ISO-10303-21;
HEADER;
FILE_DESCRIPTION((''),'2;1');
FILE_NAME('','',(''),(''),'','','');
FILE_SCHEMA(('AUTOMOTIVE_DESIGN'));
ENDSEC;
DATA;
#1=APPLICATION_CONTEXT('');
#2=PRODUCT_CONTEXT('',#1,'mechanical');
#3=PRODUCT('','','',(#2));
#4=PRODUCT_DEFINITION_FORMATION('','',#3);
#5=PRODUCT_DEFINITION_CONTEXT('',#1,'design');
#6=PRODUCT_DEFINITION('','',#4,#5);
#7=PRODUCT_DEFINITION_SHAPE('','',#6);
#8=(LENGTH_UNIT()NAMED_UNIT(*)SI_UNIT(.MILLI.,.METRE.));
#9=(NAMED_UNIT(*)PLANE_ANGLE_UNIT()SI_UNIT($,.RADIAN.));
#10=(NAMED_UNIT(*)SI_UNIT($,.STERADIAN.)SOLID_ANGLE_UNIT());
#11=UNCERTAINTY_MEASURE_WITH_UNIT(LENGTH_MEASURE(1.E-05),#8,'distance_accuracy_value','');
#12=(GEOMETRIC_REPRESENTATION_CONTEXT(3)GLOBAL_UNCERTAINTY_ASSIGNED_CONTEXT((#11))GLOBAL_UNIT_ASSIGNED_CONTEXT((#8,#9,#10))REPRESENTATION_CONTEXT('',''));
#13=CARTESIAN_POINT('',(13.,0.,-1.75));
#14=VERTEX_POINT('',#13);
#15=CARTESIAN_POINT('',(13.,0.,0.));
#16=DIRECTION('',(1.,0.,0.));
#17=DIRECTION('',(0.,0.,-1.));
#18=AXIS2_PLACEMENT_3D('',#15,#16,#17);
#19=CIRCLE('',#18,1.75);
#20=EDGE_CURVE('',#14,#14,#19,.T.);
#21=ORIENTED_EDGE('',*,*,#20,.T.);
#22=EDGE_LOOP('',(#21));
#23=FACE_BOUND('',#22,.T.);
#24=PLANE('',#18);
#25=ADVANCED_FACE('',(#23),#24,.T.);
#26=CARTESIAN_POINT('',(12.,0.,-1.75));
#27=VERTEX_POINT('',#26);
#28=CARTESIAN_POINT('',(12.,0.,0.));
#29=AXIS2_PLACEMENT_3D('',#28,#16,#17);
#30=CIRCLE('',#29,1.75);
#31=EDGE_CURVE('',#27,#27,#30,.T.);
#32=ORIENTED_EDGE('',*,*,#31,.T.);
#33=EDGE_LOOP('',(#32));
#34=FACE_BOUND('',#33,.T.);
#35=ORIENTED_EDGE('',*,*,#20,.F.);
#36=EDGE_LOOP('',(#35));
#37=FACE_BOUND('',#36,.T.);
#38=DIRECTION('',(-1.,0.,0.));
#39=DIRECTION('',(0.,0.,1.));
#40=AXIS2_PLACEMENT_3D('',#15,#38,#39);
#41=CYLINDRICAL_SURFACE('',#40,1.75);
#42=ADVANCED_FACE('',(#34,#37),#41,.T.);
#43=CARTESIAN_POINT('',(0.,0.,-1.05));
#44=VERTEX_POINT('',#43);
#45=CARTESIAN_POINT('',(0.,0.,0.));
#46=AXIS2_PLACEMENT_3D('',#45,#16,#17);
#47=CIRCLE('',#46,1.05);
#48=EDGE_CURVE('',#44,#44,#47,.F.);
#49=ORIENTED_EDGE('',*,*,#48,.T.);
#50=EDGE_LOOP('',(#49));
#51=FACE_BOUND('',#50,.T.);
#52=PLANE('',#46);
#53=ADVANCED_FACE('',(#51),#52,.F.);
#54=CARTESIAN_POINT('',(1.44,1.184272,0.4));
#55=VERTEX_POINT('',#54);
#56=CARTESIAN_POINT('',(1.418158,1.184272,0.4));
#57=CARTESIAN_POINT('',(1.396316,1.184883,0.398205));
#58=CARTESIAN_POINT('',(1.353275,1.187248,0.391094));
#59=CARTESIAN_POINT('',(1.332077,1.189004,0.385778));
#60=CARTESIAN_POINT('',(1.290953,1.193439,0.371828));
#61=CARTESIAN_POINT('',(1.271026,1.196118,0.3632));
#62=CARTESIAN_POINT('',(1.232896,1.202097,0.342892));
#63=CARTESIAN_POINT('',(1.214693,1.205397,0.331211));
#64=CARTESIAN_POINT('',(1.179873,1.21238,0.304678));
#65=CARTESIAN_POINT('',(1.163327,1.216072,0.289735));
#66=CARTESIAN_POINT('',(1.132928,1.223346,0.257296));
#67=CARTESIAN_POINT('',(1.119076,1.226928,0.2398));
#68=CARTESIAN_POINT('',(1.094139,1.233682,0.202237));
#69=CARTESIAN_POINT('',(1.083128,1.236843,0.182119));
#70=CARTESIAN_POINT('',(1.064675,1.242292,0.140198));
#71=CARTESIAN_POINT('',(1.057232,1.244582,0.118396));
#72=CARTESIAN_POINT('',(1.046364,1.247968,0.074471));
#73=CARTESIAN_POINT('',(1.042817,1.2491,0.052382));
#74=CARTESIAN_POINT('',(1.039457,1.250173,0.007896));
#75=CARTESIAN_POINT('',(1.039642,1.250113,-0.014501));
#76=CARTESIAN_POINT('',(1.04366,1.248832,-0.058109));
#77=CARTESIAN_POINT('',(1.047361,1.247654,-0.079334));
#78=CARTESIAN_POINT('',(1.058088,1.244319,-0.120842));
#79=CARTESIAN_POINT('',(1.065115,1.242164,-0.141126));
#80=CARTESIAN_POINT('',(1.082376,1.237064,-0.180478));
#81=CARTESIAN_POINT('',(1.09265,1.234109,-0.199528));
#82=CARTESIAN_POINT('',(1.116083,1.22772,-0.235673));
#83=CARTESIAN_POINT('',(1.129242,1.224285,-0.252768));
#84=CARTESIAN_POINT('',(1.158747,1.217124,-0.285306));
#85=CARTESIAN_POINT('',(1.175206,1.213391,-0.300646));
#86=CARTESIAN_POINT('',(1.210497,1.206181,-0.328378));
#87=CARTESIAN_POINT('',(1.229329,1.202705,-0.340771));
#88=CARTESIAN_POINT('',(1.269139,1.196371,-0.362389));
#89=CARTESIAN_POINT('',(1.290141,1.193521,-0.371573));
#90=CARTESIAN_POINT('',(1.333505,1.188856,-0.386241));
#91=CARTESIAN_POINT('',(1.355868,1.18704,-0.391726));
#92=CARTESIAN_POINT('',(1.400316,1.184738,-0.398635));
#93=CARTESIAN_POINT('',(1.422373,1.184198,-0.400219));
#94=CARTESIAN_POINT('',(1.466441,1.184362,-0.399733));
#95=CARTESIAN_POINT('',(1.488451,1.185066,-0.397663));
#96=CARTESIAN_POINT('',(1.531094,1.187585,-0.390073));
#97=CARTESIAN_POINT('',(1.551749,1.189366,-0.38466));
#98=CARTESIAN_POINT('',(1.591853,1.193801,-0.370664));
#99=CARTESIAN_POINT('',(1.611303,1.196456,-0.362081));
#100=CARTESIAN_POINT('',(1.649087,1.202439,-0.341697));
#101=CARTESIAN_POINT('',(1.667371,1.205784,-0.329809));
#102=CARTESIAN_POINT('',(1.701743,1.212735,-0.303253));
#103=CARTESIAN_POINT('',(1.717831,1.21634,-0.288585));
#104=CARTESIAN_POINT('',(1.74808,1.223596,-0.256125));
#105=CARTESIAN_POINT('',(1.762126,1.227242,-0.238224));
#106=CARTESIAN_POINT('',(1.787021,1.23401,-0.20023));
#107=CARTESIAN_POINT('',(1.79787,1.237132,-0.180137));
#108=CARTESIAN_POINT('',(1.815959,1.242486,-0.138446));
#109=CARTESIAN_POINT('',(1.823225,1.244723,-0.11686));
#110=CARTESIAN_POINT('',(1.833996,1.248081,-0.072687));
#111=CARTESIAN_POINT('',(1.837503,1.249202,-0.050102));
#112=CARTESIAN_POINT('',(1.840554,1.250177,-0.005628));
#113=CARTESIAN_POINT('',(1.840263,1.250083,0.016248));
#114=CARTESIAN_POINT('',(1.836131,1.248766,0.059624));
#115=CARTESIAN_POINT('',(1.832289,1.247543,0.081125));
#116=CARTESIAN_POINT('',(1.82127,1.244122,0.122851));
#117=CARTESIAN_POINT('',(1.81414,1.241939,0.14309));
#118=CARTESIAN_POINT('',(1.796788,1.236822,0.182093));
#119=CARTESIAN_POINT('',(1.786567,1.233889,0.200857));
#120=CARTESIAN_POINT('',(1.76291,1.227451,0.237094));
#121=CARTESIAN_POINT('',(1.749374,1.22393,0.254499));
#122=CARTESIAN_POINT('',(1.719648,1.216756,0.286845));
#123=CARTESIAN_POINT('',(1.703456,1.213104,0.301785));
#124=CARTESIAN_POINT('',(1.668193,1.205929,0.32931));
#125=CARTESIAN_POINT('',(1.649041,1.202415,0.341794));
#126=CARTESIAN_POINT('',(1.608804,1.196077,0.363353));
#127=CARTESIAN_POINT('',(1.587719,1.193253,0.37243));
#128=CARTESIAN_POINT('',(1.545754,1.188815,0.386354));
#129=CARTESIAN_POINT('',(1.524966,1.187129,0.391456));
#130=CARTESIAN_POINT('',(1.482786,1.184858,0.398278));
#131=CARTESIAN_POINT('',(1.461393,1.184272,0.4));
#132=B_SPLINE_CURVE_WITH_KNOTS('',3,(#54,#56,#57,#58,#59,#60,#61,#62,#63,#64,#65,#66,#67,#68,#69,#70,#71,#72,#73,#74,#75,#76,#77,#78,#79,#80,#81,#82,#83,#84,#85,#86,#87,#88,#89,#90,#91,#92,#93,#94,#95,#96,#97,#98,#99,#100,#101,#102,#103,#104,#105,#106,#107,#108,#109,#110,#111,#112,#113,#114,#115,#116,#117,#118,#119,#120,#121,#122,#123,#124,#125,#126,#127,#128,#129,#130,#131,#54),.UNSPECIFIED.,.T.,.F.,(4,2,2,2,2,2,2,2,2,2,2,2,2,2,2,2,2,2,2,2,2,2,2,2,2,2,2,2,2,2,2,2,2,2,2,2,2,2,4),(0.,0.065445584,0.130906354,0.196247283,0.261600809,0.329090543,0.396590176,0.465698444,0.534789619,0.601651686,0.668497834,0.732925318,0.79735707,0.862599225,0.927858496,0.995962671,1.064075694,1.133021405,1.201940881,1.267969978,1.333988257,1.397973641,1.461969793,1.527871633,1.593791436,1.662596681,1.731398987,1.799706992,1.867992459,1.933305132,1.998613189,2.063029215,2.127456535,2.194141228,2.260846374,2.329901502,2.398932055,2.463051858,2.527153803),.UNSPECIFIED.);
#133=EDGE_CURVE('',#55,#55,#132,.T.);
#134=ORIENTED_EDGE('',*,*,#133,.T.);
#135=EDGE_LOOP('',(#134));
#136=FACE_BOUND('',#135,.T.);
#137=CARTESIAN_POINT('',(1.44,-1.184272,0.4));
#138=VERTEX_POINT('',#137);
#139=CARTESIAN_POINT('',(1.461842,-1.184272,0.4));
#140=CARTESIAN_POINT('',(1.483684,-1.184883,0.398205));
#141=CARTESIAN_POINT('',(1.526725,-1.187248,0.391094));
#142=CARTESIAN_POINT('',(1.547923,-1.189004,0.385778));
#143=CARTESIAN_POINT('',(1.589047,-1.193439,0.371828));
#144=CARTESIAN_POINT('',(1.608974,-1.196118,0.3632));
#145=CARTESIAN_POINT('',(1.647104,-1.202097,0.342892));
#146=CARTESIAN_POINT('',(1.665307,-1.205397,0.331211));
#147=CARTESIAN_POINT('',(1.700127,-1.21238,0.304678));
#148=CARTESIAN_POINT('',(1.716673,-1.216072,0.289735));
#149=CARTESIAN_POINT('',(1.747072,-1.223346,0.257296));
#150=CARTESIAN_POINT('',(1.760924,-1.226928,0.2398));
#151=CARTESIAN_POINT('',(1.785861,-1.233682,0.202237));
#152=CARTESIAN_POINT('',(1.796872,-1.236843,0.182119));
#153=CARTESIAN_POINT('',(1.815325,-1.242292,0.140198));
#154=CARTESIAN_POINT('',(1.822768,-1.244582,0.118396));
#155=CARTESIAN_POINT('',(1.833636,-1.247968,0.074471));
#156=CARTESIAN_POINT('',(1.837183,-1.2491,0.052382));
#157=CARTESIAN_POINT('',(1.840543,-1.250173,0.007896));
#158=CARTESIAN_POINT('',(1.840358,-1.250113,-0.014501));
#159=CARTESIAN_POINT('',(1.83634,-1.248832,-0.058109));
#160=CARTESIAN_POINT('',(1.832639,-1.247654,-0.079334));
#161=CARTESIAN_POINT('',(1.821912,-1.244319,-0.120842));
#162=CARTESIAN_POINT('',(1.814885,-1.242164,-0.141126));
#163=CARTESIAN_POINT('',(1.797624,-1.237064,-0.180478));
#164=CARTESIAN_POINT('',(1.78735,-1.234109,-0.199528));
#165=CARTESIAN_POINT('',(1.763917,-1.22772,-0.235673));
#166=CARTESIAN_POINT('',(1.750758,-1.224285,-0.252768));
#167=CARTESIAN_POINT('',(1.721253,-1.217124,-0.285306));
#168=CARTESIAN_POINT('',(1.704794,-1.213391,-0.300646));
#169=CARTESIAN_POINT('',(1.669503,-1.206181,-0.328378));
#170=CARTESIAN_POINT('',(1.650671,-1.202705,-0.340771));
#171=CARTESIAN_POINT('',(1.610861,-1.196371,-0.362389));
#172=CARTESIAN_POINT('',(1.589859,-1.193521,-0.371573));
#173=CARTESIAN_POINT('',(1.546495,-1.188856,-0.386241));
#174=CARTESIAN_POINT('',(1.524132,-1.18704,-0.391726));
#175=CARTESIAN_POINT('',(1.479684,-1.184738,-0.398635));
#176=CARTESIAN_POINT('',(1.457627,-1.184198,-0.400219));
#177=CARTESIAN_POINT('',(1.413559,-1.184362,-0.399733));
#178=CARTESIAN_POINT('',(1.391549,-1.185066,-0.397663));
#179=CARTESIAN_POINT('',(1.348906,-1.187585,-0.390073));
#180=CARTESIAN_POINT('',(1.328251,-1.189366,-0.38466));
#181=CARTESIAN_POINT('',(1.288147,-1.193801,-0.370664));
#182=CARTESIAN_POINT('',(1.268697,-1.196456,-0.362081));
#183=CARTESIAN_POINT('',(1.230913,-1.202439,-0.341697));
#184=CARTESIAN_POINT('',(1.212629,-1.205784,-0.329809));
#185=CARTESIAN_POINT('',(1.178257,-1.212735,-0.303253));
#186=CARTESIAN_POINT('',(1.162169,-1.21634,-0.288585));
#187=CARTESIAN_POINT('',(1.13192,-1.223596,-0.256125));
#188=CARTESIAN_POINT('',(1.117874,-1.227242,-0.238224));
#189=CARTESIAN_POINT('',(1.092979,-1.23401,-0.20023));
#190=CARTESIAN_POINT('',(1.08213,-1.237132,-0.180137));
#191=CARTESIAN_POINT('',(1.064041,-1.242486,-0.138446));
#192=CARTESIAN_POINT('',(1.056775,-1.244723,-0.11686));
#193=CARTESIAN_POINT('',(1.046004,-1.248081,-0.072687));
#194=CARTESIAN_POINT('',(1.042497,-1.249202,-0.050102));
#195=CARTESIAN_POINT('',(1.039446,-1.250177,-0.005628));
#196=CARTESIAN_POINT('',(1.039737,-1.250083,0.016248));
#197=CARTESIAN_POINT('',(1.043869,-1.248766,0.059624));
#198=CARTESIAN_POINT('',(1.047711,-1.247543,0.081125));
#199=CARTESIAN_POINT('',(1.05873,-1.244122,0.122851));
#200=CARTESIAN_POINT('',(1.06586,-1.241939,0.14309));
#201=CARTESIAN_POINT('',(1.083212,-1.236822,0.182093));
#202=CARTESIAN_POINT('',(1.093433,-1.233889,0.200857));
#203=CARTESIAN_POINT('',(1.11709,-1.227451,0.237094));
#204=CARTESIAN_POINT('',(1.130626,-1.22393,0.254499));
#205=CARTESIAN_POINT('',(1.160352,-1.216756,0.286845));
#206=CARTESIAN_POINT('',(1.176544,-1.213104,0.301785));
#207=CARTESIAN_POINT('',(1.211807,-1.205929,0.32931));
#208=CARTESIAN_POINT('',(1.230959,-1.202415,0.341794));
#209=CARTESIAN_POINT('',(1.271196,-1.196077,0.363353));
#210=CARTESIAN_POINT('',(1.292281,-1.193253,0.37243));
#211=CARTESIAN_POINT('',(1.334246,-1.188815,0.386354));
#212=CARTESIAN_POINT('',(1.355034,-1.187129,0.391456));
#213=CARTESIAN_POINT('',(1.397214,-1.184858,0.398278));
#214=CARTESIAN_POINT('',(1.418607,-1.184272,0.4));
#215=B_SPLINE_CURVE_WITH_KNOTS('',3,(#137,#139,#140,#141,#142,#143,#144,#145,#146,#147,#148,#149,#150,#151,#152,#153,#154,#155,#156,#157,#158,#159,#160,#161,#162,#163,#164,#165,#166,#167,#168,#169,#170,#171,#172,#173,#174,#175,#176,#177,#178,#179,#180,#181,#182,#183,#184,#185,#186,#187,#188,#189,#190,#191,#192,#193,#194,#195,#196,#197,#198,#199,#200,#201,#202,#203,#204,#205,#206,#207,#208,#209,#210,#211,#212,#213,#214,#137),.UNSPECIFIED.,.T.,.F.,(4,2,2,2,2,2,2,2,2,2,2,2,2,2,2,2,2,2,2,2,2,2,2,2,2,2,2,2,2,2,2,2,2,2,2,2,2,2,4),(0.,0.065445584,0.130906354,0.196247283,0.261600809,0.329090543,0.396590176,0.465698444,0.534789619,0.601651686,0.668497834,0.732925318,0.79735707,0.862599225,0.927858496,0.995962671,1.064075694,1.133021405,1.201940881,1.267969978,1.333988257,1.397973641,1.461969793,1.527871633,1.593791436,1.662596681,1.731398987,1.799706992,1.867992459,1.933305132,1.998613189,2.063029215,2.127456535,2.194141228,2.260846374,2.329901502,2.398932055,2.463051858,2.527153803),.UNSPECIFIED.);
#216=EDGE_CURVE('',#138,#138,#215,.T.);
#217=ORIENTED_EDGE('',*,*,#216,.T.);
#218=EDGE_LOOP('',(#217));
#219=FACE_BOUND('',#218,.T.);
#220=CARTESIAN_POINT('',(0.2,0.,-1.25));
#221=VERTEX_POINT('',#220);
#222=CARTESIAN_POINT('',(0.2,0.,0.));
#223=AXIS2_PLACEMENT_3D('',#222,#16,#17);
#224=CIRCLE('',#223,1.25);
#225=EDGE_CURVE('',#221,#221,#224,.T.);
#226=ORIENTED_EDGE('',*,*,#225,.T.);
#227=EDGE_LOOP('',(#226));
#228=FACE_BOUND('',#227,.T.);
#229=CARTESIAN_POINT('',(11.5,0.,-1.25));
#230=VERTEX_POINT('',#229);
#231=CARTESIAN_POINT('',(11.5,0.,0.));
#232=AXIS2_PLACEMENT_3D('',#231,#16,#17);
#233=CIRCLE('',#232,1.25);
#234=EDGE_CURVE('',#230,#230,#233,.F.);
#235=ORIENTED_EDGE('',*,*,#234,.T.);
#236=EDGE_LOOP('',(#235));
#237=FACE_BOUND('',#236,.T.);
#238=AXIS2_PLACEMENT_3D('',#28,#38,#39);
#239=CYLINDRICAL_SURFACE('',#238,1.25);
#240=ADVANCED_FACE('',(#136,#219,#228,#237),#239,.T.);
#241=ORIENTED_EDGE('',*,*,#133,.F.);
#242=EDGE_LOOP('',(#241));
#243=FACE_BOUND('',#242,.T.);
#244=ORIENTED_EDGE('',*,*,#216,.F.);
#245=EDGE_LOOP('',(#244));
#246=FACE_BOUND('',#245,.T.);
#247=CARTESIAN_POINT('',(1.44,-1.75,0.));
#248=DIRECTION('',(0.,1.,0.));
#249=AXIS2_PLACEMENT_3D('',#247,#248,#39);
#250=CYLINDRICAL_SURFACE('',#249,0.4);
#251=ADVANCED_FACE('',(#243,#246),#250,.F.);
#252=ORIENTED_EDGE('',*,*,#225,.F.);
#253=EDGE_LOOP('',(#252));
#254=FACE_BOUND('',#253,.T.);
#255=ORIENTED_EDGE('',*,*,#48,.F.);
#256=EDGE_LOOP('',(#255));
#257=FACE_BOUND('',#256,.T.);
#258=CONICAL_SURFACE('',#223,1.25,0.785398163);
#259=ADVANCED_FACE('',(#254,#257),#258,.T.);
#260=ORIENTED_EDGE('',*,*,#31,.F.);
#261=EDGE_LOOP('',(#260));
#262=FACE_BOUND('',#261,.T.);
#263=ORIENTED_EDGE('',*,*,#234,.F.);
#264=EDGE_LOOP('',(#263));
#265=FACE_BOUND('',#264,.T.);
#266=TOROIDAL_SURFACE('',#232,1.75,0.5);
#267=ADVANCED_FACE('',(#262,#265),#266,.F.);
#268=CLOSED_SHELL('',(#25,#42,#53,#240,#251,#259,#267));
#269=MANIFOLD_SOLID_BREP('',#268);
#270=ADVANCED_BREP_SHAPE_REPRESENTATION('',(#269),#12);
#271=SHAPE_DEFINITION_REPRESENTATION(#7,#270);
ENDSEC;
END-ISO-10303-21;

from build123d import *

# Parameters (mm, degrees)
SKETCH1_R               = 1.25
BOSS_EXTRUDE1_DEPTH     = 12
SKETCH2_R               = 1.75
BOSS_EXTRUDE2_DEPTH     = 1
FILLET1_R               = 0.5
CUT_EXTRUDE1_DEPTH      = 14.233480268
CUT_EXTRUDE1_DEPTH_BACK = 14.233480268
SKETCH3_R               = 0.4
CHAMFER1_SIZE           = 0.2


with BuildPart() as part:
    # Sketch1 → Boss-Extrude1 (new body)
    with BuildSketch(Plane(origin=(0, 0, 0), x_dir=(0, 0, -1), z_dir=(1, 0, 0))):
        Circle(SKETCH1_R)
    extrude(amount=BOSS_EXTRUDE1_DEPTH)

    # Sketch2 → Boss-Extrude2 (add)
    with BuildSketch(Plane(origin=(12, 0, 0), x_dir=(0, 0, -1), z_dir=(1, 0, 0))):
        Circle(SKETCH2_R)
    extrude(amount=BOSS_EXTRUDE2_DEPTH)

    # Fillet1
    fillet1_edges = [part.edges().sort_by_distance(p)[0] for p in [
        (12, 0, 1.25),
    ]]
    fillet(fillet1_edges, radius=FILLET1_R - 0.0001)  # a hair under: the kernel refuses the full size

    # Sketch3 → Cut-Extrude1 (cut, two sides: drawn at the far end of the back side and taken through both)
    with BuildSketch(Plane(origin=(0, 0, 0), x_dir=(1, 0, 0), z_dir=(0, 1, 0)).offset(-CUT_EXTRUDE1_DEPTH_BACK)):
        with Locations(Location((1.44, 0, 0), (0, 0, 270))):
            Circle(SKETCH3_R)
    extrude(amount=CUT_EXTRUDE1_DEPTH + CUT_EXTRUDE1_DEPTH_BACK, mode=Mode.SUBTRACT)

    # Chamfer1
    chamfer1_edges = [part.edges().sort_by_distance(p)[0] for p in [
        (0, 0, 1.25),
    ]]
    chamfer(chamfer1_edges, length=CHAMFER1_SIZE)


solid = part.part
